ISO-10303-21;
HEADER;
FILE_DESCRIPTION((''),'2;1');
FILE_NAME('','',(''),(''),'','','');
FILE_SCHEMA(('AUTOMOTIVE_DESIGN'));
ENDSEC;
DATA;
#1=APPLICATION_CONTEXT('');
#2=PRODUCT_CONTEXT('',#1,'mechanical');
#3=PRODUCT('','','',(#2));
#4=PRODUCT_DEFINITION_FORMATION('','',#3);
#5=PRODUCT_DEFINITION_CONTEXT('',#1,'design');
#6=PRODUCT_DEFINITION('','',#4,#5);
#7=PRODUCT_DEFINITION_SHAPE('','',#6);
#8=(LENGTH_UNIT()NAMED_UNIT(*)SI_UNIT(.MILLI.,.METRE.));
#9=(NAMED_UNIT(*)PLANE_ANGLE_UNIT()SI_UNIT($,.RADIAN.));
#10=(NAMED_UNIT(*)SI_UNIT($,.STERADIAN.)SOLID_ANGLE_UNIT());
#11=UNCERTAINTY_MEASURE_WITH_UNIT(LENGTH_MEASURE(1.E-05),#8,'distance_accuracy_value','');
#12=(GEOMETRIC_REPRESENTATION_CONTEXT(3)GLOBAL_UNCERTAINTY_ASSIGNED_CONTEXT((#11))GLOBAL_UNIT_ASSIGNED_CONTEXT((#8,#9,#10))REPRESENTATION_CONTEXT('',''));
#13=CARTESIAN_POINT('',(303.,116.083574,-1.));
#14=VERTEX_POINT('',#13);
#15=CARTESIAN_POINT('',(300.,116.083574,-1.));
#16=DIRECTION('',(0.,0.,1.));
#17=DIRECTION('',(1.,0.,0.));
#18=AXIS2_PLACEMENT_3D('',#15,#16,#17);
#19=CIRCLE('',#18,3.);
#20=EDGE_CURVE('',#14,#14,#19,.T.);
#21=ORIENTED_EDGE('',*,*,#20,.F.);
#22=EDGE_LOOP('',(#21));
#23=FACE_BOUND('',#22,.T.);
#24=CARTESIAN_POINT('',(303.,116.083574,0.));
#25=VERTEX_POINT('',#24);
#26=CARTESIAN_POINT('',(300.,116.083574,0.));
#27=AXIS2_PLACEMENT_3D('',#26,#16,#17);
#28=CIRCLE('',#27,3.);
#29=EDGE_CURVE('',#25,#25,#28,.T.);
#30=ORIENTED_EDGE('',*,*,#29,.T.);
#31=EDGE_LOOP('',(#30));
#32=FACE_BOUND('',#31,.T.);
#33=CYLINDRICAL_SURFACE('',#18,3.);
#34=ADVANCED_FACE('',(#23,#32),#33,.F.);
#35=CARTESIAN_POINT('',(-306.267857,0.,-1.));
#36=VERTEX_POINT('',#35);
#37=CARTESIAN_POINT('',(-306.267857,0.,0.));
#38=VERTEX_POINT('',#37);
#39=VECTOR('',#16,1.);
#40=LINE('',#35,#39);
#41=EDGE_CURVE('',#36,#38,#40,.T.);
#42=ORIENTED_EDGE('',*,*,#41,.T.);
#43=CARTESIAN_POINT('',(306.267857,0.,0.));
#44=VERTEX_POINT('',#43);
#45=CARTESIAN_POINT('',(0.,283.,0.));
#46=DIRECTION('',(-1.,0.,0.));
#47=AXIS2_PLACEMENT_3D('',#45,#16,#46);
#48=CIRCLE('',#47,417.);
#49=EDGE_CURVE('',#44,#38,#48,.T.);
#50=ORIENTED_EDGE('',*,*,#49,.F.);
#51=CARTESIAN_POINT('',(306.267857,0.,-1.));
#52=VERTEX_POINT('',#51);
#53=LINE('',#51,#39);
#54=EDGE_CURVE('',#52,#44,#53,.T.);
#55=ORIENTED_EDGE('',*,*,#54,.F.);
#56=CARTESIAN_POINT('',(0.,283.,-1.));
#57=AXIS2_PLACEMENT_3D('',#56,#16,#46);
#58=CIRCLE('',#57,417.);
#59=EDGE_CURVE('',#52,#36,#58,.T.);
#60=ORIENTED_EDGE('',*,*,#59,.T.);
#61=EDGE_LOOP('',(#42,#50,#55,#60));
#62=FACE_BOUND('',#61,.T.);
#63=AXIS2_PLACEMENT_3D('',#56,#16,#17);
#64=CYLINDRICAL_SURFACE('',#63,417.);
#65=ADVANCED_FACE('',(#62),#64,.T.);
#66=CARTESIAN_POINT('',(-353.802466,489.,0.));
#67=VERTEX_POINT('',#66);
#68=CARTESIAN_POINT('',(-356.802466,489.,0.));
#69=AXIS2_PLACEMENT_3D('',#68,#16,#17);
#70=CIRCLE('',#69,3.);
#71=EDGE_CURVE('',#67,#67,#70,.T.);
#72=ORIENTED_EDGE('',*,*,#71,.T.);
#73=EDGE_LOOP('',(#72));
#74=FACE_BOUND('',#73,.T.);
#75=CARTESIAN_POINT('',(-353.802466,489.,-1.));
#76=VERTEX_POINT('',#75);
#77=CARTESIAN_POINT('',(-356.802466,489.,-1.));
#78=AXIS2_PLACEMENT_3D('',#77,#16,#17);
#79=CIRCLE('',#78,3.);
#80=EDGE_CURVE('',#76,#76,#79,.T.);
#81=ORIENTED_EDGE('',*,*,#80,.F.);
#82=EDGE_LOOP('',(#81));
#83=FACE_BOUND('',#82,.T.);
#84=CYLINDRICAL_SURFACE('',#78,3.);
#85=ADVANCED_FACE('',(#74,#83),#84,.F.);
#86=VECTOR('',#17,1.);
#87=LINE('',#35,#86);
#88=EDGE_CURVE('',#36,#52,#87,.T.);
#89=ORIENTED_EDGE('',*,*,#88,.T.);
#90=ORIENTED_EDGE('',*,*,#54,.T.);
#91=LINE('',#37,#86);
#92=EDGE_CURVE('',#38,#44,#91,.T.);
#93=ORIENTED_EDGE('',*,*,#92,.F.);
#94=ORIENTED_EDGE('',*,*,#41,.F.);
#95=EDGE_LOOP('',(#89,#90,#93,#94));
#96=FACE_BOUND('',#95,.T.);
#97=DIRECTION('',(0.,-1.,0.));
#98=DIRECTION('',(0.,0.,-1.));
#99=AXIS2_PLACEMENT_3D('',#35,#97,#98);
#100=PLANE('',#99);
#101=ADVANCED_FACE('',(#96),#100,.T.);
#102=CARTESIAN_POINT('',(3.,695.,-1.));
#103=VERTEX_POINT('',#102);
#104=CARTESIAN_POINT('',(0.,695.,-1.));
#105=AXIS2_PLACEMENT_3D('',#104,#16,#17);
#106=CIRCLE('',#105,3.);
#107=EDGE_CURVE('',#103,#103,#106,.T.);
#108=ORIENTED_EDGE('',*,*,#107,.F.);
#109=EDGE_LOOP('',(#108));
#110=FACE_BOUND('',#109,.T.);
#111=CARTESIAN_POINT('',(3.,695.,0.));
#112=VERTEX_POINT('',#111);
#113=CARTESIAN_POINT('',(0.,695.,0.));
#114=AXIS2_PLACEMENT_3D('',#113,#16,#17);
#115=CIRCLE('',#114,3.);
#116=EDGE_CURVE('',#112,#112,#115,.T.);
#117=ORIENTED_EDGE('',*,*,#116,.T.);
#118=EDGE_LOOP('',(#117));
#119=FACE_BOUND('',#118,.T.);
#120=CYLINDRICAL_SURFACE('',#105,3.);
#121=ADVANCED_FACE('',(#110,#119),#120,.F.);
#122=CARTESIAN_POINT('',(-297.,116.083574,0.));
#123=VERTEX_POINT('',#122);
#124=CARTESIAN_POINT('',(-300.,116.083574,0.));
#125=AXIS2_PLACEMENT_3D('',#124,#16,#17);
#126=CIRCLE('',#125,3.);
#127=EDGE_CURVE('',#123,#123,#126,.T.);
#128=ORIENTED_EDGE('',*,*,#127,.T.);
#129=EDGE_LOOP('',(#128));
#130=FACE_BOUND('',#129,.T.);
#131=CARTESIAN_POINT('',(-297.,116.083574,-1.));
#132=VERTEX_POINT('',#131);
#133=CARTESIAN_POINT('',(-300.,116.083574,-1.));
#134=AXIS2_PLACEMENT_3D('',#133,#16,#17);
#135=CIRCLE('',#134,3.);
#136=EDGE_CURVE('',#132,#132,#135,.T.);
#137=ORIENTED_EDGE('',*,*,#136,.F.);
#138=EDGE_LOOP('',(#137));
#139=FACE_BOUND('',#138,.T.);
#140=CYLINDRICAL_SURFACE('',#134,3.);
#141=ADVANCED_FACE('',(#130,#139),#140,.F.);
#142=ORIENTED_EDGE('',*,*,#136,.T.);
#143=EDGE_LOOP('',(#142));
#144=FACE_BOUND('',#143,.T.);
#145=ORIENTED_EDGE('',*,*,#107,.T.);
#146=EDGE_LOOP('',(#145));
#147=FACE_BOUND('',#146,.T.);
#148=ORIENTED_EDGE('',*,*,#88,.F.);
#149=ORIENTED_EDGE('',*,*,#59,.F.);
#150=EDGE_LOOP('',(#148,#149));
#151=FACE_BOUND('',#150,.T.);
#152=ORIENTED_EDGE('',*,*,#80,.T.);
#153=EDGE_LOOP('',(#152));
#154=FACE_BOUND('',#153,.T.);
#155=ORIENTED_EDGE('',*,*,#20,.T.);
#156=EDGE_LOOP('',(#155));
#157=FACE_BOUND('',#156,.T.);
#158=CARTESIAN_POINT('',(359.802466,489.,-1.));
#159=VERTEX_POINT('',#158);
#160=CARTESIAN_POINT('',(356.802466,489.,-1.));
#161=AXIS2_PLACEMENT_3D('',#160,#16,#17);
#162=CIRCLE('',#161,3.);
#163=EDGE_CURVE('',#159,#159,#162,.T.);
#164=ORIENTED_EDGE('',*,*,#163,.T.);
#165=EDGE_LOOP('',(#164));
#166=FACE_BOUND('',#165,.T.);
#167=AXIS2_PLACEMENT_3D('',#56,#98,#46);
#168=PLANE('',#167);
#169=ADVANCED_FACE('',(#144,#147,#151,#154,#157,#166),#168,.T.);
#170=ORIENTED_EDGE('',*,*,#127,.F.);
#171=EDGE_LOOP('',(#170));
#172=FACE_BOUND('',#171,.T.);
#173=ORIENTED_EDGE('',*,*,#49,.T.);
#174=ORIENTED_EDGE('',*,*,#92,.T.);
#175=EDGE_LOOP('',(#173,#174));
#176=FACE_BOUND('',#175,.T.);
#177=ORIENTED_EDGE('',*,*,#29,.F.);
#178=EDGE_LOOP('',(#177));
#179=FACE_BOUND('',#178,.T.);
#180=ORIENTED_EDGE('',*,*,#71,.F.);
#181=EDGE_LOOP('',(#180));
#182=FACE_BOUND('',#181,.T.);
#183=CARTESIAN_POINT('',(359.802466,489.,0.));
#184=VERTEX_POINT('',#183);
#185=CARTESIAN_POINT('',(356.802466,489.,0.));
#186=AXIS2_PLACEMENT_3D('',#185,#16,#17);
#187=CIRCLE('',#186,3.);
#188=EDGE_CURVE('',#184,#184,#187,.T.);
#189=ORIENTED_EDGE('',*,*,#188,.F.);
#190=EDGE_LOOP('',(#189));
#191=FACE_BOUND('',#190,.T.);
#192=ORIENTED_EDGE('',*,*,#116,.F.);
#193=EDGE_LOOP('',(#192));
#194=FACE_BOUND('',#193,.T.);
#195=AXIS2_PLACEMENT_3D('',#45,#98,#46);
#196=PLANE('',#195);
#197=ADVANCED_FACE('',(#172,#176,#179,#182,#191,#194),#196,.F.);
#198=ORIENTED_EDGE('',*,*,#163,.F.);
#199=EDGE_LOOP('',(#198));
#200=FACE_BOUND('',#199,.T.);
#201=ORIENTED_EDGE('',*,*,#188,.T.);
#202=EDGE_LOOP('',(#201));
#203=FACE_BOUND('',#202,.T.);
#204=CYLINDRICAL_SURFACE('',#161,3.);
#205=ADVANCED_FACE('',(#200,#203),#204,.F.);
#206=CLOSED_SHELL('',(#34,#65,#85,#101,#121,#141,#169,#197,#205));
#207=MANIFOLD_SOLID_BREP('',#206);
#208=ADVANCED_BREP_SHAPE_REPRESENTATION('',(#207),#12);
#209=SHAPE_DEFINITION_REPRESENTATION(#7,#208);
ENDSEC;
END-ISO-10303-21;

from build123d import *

# Parameters (mm, degrees)
SM_BASE_FLANGE_1_DEPTH = 1
SKETCH_2_R             = 3
CUT_EXTRUDE_1_DEPTH    = 815.794452608


# Sheet-metal steps are written as plain solids
with BuildPart() as part:
    # Sketch 1 → Базовая кромка1 (new body)
    with BuildSketch(Plane.XY):
        with BuildLine():
            Line((-306.267856622, 0), (306.267856622, 0))
            ThreePointArc((306.267856622, 0), (0, 700), (-306.267856622, 0))
        make_face()
    extrude(amount=-SM_BASE_FLANGE_1_DEPTH)

    # Эскиз2 → Вырез-Вытянуть1 (cut, through all)
    with BuildSketch(Plane.XY):
        with Locations((-300, 116.083573562)):
            Circle(SKETCH_2_R)
        with Locations((300, 116.083573562)):
            Circle(SKETCH_2_R)
        with Locations((0, 695)):
            Circle(SKETCH_2_R)
        with Locations((356.802466359, 489)):
            Circle(SKETCH_2_R)
        with Locations((-356.802466359, 489)):
            Circle(SKETCH_2_R)
    extrude(amount=-CUT_EXTRUDE_1_DEPTH, mode=Mode.SUBTRACT)


solid = part.part
